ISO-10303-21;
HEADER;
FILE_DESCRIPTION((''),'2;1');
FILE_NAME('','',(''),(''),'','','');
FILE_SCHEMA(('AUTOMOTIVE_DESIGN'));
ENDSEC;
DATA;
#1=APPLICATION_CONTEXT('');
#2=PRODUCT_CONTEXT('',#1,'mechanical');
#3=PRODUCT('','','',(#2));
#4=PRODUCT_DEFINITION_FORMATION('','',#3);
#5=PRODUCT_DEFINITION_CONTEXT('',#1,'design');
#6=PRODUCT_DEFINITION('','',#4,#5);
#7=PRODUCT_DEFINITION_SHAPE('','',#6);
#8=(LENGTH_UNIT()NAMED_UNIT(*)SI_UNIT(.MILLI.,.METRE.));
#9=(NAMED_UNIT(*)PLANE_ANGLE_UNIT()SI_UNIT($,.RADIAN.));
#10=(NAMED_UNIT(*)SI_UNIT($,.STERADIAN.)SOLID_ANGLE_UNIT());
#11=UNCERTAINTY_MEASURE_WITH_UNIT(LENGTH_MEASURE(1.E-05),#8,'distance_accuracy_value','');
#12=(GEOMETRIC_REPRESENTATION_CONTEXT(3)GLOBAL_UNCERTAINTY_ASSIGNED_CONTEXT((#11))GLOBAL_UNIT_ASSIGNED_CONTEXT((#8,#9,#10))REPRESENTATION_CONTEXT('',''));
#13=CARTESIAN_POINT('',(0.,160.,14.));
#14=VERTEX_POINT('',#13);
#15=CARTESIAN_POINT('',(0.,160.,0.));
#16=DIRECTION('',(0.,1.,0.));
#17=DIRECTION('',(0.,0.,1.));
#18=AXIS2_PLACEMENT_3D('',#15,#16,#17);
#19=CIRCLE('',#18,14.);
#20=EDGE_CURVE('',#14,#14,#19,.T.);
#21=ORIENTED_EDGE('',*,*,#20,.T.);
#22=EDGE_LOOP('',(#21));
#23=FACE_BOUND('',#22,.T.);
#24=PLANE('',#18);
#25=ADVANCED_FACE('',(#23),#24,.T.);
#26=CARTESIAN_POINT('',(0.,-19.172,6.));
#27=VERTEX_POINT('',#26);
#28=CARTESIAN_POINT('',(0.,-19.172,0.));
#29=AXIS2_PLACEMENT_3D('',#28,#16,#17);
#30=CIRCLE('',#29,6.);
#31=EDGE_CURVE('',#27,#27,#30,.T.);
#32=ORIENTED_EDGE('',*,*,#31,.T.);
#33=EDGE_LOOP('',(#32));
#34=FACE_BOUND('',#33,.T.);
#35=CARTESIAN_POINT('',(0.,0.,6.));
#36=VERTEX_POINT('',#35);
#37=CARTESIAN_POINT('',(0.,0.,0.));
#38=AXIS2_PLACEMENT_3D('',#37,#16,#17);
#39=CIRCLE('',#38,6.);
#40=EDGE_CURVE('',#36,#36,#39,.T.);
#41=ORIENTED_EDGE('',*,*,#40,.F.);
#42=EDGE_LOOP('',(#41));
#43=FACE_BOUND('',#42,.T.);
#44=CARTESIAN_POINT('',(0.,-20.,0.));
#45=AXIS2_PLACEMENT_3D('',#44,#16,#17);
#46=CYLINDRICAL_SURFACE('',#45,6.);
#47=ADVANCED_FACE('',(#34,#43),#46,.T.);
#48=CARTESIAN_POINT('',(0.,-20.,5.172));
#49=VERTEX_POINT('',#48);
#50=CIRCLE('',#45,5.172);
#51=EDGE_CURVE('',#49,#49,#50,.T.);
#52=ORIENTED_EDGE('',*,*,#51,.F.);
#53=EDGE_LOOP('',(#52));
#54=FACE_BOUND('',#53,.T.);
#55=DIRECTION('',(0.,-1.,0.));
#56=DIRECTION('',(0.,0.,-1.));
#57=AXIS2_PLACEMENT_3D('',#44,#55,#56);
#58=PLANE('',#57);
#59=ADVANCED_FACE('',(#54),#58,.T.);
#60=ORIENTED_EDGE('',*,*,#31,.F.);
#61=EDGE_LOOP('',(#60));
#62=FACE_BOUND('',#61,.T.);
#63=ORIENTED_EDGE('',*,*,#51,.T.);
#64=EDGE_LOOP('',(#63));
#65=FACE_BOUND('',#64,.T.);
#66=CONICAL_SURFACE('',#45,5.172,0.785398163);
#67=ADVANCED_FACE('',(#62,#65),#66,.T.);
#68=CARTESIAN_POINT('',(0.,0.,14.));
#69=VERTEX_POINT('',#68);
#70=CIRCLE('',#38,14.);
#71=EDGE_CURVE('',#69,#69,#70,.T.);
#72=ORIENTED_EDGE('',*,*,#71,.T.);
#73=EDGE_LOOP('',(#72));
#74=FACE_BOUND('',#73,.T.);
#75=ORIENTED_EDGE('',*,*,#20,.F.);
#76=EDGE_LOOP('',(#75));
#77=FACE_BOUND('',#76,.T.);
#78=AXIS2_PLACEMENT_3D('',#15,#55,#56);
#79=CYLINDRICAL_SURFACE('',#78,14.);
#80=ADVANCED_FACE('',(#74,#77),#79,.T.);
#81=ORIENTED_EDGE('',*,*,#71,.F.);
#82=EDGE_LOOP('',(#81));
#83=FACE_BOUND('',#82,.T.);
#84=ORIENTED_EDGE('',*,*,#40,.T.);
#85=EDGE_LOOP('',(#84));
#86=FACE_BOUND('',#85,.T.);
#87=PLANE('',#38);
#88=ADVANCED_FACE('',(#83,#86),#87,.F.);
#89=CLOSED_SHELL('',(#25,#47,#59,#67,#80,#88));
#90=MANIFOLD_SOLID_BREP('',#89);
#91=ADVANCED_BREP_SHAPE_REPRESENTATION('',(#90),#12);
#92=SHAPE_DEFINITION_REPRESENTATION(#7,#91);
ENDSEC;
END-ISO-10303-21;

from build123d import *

# Parameters (mm, degrees)
SKETCH1_R           = 14
BOSS_EXTRUDE1_DEPTH = 160
SKETCH2_R           = 10
BOSS_EXTRUDE2_DEPTH = 20


# Read off the part's stored shape, not the designer's step: M12x1.5 Machine Threads Stud1
with BuildPart() as part:
    # Sketch1 → Boss-Extrude1 (new body)
    with BuildSketch(Plane(origin=(0, 0, 0), x_dir=(1, 0, 0), z_dir=(0, 1, 0))):
        with Locations(Location((0, 0, 0), (0, 0, 270))):
            Circle(SKETCH1_R)
    extrude(amount=BOSS_EXTRUDE1_DEPTH)

    # Sketch2 → Boss-Extrude2 (add)
    with BuildSketch(Plane.XZ):
        with Locations(Location((0, 0, 0), (0, 0, 270))):
            Circle(SKETCH2_R)
    extrude(amount=BOSS_EXTRUDE2_DEPTH)

    # M12x1.5 Machine Threads Stud1 outline → M12x1.5 Machine Threads Stud1 (revolve, cut)
    with BuildSketch(Plane.XY):
        Polygon((10, 0), (6, 0), (6, -19.172), (5.172, -20), (10, -20), align=None)
    revolve(axis=Axis((0, 0, 0), (0, 1, 0)), mode=Mode.SUBTRACT)


solid = part.part
